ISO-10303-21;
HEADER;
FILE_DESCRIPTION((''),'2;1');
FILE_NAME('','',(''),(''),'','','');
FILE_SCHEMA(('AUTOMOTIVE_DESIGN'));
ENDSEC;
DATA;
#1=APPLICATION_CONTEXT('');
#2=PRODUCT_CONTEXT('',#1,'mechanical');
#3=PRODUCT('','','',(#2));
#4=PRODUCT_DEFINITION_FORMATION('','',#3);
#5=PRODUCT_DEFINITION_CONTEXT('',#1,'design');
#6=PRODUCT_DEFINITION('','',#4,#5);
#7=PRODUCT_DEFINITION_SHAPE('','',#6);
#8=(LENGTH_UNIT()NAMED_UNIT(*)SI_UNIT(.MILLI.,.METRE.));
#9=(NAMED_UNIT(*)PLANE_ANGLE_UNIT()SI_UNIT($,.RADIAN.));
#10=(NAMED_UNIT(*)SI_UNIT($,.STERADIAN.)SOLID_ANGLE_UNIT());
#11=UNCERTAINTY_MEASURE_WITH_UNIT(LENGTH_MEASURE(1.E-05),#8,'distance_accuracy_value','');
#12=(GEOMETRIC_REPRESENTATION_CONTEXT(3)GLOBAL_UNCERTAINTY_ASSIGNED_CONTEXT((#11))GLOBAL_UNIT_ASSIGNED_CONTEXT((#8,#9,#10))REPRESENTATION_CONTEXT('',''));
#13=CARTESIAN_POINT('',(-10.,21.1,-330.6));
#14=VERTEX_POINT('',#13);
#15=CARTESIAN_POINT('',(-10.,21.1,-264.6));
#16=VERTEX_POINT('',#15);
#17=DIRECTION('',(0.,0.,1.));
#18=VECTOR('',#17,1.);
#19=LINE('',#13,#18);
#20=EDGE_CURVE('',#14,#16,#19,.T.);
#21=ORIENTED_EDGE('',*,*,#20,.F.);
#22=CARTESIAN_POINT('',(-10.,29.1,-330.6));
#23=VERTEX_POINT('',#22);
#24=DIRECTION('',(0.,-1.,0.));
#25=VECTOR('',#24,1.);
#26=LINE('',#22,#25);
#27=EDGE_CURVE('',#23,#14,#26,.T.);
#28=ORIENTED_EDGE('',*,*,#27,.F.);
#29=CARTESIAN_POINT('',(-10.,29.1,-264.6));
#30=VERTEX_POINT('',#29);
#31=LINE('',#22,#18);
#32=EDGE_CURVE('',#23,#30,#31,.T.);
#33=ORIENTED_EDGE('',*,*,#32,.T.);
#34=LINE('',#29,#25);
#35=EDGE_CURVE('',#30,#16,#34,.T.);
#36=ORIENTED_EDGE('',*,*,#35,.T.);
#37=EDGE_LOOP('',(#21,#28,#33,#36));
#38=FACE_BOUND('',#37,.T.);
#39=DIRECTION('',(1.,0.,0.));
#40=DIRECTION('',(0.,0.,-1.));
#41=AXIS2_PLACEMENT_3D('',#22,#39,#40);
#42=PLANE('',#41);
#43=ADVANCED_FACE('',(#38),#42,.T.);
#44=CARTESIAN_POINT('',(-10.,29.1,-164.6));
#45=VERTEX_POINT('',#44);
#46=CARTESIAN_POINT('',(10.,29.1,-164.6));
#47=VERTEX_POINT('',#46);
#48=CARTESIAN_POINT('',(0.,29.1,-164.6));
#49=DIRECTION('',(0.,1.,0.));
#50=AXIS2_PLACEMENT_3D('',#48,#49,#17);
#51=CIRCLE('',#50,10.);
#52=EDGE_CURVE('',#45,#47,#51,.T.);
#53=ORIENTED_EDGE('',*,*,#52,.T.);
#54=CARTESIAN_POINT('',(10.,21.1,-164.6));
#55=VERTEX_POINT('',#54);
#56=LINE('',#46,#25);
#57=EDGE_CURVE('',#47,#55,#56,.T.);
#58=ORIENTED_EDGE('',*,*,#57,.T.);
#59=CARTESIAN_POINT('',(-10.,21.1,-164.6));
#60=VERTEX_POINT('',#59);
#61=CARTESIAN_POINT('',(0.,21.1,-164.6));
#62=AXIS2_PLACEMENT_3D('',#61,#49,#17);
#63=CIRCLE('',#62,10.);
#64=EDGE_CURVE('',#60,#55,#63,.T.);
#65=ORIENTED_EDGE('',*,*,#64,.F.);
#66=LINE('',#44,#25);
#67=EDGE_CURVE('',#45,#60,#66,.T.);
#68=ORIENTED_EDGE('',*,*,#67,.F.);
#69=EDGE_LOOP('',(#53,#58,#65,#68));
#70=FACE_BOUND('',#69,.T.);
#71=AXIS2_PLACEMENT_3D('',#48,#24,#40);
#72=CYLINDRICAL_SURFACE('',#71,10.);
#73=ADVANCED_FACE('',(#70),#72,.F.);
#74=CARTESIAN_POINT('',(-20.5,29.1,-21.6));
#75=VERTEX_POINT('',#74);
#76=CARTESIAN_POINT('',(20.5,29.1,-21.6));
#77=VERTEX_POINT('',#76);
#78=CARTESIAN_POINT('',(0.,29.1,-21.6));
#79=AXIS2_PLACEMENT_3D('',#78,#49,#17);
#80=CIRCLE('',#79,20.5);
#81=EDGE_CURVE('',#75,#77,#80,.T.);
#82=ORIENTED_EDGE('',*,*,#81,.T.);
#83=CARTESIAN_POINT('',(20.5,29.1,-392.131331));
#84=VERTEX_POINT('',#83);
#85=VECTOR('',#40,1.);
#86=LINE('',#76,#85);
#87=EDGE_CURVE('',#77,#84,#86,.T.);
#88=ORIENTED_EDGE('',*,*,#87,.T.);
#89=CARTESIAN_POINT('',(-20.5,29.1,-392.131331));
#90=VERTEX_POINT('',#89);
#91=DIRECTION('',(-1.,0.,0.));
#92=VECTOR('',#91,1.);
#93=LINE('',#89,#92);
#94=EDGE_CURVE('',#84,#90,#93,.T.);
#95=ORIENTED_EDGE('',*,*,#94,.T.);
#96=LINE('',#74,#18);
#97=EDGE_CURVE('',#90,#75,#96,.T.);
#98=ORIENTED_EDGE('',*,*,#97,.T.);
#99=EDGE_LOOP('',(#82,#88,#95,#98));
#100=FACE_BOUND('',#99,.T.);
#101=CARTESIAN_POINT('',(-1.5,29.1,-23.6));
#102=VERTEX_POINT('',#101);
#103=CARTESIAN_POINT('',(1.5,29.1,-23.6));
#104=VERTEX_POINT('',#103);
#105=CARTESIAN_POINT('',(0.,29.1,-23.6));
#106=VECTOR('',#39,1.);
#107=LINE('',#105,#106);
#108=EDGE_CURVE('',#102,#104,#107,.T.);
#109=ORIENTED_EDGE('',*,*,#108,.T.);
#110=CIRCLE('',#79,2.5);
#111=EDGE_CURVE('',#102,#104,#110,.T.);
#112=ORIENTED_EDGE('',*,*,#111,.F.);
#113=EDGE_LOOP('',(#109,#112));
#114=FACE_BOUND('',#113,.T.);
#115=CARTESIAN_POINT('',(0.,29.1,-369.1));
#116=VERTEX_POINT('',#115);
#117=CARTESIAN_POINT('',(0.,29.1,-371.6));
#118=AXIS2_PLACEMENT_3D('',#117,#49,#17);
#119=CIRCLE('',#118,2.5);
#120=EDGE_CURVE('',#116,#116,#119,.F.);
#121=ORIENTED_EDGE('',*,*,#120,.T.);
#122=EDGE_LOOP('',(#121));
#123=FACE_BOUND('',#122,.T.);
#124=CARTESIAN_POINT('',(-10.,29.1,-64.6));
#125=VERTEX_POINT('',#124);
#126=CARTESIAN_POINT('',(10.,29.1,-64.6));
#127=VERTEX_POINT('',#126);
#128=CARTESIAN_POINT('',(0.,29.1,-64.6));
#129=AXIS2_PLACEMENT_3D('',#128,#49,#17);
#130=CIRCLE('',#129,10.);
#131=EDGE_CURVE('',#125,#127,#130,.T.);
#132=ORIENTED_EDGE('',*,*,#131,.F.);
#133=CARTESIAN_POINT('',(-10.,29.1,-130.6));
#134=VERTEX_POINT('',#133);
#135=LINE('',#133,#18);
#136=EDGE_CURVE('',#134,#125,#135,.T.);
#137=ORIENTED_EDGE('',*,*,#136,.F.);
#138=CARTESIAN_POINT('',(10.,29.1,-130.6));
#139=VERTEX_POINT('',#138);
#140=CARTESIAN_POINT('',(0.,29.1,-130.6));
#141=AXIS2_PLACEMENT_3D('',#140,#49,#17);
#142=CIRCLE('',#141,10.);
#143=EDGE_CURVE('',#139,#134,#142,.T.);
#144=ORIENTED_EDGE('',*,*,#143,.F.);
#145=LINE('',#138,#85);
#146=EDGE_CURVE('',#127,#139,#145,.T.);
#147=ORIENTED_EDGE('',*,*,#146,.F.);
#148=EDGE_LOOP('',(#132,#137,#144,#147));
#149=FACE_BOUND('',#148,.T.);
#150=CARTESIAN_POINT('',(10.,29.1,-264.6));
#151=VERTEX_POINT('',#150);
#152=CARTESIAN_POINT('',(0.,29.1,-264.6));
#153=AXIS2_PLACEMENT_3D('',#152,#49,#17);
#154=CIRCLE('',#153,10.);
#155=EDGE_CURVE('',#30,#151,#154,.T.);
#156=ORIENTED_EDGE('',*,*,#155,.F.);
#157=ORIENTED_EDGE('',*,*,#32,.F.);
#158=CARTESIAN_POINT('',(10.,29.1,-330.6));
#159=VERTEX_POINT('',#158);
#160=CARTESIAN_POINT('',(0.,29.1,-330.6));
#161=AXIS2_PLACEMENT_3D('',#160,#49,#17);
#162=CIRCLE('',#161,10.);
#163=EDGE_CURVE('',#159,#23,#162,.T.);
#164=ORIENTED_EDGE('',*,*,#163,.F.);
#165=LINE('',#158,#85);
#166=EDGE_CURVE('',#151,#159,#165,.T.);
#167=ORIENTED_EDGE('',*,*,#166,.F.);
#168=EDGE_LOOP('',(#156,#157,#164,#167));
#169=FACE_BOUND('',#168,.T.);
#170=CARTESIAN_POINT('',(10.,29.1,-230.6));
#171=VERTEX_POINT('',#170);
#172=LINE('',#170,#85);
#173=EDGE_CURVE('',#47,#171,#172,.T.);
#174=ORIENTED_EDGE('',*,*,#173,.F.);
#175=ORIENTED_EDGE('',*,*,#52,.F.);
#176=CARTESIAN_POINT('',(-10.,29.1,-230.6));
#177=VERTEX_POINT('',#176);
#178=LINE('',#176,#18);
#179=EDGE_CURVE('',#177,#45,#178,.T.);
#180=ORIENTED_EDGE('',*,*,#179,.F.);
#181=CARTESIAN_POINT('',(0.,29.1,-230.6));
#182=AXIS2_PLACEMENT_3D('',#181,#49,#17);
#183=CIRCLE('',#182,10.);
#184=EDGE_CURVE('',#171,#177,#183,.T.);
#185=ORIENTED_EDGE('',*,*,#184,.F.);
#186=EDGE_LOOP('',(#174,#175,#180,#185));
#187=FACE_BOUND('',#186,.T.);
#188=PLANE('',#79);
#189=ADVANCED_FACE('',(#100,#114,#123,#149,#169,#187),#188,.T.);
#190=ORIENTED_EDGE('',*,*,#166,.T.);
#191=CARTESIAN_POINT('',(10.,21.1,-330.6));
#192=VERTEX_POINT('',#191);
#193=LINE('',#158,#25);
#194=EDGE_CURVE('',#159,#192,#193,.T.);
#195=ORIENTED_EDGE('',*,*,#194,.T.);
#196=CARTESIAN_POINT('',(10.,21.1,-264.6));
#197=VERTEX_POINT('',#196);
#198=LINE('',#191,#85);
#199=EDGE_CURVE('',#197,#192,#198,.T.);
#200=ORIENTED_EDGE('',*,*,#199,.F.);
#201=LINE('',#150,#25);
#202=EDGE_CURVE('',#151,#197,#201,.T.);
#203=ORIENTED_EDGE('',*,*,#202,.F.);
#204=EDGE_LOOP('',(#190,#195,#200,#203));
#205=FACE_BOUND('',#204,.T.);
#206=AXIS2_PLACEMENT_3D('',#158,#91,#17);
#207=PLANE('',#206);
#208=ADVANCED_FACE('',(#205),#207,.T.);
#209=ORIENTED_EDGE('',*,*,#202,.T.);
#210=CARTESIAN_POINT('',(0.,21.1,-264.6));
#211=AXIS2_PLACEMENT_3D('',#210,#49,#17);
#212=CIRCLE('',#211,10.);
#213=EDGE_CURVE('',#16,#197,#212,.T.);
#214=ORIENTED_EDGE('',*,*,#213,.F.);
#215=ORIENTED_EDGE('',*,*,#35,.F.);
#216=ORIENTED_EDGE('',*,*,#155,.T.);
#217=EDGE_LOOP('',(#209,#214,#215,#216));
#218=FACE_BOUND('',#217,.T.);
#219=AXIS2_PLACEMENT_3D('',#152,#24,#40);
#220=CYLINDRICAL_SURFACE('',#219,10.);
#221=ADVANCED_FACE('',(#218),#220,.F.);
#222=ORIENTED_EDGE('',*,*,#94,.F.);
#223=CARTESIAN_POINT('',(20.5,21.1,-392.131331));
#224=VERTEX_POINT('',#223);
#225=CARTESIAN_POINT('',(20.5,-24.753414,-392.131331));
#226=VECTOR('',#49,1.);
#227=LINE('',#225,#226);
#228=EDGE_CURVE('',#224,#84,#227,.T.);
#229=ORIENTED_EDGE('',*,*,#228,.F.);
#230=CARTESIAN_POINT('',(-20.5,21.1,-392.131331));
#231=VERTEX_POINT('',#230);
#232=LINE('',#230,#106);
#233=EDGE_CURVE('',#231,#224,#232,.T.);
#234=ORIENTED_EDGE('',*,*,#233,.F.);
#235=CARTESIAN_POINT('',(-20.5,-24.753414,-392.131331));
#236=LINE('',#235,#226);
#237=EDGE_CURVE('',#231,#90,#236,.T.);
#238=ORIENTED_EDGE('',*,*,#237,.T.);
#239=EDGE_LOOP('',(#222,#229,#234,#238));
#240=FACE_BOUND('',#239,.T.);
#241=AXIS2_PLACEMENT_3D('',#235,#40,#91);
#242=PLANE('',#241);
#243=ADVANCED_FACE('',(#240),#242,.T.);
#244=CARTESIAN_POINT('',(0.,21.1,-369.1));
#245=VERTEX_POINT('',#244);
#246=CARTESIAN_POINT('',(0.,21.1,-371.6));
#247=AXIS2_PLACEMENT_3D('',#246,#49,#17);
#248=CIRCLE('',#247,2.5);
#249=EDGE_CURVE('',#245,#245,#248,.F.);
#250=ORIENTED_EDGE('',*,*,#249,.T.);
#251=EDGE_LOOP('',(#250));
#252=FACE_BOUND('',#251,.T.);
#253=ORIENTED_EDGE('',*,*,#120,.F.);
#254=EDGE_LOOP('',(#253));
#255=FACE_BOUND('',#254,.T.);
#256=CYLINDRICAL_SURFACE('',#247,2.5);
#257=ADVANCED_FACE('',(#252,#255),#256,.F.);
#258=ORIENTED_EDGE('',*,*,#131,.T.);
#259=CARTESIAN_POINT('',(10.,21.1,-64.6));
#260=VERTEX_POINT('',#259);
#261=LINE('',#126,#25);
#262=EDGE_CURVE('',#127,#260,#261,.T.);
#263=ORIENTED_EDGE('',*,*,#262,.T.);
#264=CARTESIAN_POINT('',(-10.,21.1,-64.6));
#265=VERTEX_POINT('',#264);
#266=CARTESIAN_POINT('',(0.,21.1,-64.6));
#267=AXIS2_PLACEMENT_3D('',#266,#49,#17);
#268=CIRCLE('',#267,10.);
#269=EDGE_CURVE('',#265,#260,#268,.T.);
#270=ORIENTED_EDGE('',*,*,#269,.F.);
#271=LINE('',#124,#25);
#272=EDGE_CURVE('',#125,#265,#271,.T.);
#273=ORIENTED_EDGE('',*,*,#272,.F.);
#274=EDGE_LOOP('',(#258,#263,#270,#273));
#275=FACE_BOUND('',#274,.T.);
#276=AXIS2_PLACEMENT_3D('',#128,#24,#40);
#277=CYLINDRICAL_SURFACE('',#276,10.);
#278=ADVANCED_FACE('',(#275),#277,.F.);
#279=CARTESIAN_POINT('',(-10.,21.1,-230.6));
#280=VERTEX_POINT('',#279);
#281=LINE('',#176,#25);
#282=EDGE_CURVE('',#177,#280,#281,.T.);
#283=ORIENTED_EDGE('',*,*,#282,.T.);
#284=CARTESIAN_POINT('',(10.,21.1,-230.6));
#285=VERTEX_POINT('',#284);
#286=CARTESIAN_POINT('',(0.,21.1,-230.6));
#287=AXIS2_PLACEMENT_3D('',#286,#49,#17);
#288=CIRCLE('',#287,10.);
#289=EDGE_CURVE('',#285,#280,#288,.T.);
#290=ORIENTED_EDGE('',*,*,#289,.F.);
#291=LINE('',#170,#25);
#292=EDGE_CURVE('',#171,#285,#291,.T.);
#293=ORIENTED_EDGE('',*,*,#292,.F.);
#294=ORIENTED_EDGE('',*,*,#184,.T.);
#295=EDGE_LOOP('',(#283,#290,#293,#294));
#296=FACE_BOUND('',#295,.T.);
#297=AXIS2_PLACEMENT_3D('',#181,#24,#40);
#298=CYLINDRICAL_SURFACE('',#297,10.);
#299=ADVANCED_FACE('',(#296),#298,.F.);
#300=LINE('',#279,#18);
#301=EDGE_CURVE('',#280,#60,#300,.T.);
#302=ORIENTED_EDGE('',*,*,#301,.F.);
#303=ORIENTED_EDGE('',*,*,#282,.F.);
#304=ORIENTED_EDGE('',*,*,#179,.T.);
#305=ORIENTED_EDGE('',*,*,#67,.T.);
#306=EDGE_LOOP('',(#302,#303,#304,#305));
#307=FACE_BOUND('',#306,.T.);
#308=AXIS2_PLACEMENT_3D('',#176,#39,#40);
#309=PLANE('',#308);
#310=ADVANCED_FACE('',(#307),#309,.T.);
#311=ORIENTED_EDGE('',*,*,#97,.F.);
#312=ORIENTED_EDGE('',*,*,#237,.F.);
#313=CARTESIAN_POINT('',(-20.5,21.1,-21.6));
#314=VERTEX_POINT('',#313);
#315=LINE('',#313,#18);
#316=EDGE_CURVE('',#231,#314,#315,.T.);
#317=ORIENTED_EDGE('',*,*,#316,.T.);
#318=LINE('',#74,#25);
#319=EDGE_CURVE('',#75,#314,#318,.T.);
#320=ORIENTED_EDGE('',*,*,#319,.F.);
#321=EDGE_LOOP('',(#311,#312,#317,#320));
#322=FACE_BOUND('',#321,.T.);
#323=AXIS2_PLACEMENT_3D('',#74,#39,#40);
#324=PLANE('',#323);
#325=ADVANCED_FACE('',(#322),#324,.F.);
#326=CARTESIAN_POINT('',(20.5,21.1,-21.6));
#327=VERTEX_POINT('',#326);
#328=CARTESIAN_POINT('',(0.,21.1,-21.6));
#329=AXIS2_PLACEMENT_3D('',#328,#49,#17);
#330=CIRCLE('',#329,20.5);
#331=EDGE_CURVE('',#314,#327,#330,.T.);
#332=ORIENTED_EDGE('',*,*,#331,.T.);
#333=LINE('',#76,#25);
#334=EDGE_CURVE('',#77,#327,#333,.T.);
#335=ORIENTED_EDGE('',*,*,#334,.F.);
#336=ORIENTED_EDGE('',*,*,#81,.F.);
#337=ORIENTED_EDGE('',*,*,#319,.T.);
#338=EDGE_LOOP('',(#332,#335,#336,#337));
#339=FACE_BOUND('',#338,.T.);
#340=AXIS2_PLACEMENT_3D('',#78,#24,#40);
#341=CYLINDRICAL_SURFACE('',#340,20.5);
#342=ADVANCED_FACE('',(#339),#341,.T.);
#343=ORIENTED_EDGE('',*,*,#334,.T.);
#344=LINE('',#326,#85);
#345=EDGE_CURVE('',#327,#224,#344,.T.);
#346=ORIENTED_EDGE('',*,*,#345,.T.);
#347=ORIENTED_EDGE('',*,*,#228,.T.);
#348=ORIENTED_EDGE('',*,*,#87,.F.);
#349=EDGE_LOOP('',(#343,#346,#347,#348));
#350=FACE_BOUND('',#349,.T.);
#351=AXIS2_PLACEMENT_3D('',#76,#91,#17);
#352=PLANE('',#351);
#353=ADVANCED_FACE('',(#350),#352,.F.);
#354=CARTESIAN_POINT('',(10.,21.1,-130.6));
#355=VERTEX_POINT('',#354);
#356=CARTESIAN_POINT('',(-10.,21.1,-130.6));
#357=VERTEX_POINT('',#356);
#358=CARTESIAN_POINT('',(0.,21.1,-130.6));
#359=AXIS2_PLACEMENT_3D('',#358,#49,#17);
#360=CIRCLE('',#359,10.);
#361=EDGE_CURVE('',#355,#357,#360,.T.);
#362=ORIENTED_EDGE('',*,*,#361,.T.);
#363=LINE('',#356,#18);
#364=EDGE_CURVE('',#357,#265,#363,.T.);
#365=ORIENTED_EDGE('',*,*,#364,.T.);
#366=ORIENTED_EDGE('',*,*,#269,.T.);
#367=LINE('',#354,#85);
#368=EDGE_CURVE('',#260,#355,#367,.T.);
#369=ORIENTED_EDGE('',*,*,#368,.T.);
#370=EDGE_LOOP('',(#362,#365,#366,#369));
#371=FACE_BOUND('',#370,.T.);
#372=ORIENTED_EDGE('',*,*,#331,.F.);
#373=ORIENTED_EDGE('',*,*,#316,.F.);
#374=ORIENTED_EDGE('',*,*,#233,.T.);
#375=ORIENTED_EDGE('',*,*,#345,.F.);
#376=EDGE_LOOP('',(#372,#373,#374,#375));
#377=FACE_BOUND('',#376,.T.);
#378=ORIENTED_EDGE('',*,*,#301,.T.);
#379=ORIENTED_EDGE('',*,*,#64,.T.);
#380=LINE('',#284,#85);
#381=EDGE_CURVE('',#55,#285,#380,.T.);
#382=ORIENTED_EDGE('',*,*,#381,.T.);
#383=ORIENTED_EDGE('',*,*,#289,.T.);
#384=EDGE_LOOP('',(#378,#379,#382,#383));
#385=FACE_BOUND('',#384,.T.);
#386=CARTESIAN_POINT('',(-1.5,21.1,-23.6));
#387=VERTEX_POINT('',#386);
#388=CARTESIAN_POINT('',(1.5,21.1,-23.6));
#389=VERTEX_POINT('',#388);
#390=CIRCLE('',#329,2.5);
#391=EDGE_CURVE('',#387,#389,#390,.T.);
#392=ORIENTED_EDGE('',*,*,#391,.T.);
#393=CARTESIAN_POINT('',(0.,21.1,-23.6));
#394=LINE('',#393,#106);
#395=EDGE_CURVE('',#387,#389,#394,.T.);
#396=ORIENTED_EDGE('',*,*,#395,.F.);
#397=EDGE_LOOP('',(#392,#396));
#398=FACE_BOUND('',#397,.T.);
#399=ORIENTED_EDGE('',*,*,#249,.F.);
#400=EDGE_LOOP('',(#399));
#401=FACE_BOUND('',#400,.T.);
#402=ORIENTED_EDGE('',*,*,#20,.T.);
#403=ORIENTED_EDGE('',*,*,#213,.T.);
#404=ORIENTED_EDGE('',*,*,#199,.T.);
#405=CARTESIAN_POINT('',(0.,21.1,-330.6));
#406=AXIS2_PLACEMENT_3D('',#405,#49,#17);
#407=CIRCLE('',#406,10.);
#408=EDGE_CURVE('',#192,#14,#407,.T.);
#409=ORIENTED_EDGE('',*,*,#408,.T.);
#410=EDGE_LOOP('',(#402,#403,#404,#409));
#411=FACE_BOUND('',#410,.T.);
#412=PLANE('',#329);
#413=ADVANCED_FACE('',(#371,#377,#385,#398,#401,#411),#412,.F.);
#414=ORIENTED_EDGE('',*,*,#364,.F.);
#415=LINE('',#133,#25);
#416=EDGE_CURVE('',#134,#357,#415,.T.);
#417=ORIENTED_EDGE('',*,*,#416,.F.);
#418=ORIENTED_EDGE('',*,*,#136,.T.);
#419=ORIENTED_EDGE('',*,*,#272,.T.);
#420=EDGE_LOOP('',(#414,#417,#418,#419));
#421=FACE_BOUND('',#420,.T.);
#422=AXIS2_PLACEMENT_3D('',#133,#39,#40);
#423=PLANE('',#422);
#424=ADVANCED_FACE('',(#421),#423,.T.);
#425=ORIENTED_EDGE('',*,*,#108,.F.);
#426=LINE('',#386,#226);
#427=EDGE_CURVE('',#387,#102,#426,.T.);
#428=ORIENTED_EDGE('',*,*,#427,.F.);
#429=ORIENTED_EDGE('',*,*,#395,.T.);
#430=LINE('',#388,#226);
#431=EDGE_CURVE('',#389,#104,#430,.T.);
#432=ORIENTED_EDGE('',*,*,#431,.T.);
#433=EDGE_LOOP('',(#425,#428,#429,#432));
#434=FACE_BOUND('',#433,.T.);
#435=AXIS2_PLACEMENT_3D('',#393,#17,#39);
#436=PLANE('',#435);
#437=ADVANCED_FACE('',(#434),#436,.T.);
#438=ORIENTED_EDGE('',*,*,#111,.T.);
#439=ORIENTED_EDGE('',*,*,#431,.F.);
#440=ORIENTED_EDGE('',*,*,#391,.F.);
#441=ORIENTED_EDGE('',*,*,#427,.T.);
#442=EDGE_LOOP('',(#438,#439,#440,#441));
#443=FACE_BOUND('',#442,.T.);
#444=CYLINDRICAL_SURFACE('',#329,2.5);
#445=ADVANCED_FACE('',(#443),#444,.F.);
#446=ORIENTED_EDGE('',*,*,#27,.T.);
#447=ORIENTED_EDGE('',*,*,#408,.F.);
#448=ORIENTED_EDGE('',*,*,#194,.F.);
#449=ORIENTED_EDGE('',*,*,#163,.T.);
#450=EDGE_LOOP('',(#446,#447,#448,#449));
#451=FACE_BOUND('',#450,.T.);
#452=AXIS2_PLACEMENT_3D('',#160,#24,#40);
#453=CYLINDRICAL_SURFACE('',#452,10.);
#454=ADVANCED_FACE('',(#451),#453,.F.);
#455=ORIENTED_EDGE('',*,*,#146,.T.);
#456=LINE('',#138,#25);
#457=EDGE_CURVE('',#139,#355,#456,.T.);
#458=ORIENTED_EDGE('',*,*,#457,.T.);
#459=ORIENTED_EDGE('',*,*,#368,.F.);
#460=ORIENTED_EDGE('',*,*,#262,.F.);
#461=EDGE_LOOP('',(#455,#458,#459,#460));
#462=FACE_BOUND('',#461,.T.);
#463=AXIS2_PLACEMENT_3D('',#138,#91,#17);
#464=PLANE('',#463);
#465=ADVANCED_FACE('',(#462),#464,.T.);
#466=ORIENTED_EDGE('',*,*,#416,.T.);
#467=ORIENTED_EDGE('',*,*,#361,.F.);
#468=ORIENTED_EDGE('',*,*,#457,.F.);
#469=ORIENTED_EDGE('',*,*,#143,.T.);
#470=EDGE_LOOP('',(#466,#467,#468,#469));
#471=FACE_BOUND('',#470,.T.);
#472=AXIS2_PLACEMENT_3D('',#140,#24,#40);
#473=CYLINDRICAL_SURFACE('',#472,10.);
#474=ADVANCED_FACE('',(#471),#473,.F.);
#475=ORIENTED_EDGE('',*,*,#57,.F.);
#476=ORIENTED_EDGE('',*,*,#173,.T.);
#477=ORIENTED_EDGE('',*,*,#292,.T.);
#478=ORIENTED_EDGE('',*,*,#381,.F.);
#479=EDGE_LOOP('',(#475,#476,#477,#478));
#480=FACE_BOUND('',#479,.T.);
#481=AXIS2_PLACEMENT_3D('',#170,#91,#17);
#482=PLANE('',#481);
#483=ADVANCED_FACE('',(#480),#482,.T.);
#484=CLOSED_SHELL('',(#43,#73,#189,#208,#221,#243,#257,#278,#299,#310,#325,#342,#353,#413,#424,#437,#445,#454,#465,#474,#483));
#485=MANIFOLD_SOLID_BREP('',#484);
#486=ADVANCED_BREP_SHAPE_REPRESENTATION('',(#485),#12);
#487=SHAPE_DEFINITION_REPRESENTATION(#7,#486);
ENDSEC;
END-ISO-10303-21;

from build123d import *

# Parameters (mm, degrees)
ZAPAS_CZ_1_0_1_START        = 21.1
ZAPAS_CZ_1_0_1_DEPTH        = 8
WYTNIJ_WYCI_GNI_CIE1_DEPTH  = 393.717022804
DODANIE_WYCI_GNI_CIE1_DEPTH = 8


# Read off the part's stored shape, not the designer's step: Zapas-Część1.0-1
with BuildPart() as part:
    # Zapas-Część1.0-1 outline → Zapas-Część1.0-1 (new body)
    with BuildSketch(Plane(origin=(0, 0, 0), x_dir=(1, 0, 0), z_dir=(0, 1, 0)).offset(ZAPAS_CZ_1_0_1_START)):
        with BuildLine():
            ThreePointArc((-20.5, 21.6), (0, 1.1), (20.5, 21.6))
            Line((20.5, 21.6), (20.5, 371.6))
            ThreePointArc((20.5, 371.6), (0, 392.1), (-20.5, 371.6))
            Line((-20.5, 371.6), (-20.5, 21.6))
        make_face()
        with BuildLine():
            Line((-10, 64.6), (-10, 130.6))
            ThreePointArc((-10, 130.6), (0, 140.6), (10, 130.6))
            Line((10, 130.6), (10, 64.6))
            ThreePointArc((10, 64.6), (0, 54.6), (-10, 64.6))
        make_face(mode=Mode.SUBTRACT)
        with BuildLine():
            Line((-10, 164.6), (-10, 230.6))
            ThreePointArc((-10, 230.6), (0, 240.6), (10, 230.6))
            Line((10, 230.6), (10, 164.6))
            ThreePointArc((10, 164.6), (0, 154.6), (-10, 164.6))
        make_face(mode=Mode.SUBTRACT)
        with BuildLine():
            Line((-10, 264.6), (-10, 330.6))
            ThreePointArc((-10, 330.6), (0, 340.6), (10, 330.6))
            Line((10, 330.6), (10, 264.6))
            ThreePointArc((10, 264.6), (0, 254.6), (-10, 264.6))
        make_face(mode=Mode.SUBTRACT)
    extrude(amount=ZAPAS_CZ_1_0_1_DEPTH)

    # Szkic1 → Wytnij-wyciągnięcie1 (cut, through all)
    with BuildSketch(Plane(origin=(0, 29.1, 0), x_dir=(1, 0, 0), z_dir=(0, 1, 0))):
        with BuildLine():
            Line((-1.5, 23.6), (1.5, 23.6))
            ThreePointArc((1.5, 23.6), (0, 19.1), (-1.5, 23.6))
        make_face()
        with BuildLine():
            ThreePointArc((2.5, 371.6), (-1.118033989, 373.836067977), (-1.5, 369.6))
            ThreePointArc((-1.5, 369.6), (0, 369.1), (1.5, 369.6))
            ThreePointArc((1.5, 369.6), (2.236067977, 370.481966011), (2.5, 371.6))
        make_face()
    extrude(amount=-WYTNIJ_WYCI_GNI_CIE1_DEPTH, mode=Mode.SUBTRACT)

    # Szkic2 → Dodanie-wyciągnięcie1 (add)
    with BuildSketch(Plane(origin=(0, 29.1, 0), x_dir=(1, 0, 0), z_dir=(0, 1, 0))):
        with BuildLine():
            Line((-20.5, 371.6), (-20.5, 392.131331169))
            Line((-20.5, 392.131331169), (20.5, 392.131331169))
            Line((20.5, 392.131331169), (20.5, 371.6))
            Line((20.5, 371.6), (3.983153472, 371.6))
            Line((3.983153472, 371.6), (2.5, 371.6))
            ThreePointArc((2.5, 371.6), (0, 374.1), (-2.5, 371.6))
            Line((-2.5, 371.6), (-20.5, 371.6))
        make_face()
    extrude(amount=-DODANIE_WYCI_GNI_CIE1_DEPTH)


solid = part.part
